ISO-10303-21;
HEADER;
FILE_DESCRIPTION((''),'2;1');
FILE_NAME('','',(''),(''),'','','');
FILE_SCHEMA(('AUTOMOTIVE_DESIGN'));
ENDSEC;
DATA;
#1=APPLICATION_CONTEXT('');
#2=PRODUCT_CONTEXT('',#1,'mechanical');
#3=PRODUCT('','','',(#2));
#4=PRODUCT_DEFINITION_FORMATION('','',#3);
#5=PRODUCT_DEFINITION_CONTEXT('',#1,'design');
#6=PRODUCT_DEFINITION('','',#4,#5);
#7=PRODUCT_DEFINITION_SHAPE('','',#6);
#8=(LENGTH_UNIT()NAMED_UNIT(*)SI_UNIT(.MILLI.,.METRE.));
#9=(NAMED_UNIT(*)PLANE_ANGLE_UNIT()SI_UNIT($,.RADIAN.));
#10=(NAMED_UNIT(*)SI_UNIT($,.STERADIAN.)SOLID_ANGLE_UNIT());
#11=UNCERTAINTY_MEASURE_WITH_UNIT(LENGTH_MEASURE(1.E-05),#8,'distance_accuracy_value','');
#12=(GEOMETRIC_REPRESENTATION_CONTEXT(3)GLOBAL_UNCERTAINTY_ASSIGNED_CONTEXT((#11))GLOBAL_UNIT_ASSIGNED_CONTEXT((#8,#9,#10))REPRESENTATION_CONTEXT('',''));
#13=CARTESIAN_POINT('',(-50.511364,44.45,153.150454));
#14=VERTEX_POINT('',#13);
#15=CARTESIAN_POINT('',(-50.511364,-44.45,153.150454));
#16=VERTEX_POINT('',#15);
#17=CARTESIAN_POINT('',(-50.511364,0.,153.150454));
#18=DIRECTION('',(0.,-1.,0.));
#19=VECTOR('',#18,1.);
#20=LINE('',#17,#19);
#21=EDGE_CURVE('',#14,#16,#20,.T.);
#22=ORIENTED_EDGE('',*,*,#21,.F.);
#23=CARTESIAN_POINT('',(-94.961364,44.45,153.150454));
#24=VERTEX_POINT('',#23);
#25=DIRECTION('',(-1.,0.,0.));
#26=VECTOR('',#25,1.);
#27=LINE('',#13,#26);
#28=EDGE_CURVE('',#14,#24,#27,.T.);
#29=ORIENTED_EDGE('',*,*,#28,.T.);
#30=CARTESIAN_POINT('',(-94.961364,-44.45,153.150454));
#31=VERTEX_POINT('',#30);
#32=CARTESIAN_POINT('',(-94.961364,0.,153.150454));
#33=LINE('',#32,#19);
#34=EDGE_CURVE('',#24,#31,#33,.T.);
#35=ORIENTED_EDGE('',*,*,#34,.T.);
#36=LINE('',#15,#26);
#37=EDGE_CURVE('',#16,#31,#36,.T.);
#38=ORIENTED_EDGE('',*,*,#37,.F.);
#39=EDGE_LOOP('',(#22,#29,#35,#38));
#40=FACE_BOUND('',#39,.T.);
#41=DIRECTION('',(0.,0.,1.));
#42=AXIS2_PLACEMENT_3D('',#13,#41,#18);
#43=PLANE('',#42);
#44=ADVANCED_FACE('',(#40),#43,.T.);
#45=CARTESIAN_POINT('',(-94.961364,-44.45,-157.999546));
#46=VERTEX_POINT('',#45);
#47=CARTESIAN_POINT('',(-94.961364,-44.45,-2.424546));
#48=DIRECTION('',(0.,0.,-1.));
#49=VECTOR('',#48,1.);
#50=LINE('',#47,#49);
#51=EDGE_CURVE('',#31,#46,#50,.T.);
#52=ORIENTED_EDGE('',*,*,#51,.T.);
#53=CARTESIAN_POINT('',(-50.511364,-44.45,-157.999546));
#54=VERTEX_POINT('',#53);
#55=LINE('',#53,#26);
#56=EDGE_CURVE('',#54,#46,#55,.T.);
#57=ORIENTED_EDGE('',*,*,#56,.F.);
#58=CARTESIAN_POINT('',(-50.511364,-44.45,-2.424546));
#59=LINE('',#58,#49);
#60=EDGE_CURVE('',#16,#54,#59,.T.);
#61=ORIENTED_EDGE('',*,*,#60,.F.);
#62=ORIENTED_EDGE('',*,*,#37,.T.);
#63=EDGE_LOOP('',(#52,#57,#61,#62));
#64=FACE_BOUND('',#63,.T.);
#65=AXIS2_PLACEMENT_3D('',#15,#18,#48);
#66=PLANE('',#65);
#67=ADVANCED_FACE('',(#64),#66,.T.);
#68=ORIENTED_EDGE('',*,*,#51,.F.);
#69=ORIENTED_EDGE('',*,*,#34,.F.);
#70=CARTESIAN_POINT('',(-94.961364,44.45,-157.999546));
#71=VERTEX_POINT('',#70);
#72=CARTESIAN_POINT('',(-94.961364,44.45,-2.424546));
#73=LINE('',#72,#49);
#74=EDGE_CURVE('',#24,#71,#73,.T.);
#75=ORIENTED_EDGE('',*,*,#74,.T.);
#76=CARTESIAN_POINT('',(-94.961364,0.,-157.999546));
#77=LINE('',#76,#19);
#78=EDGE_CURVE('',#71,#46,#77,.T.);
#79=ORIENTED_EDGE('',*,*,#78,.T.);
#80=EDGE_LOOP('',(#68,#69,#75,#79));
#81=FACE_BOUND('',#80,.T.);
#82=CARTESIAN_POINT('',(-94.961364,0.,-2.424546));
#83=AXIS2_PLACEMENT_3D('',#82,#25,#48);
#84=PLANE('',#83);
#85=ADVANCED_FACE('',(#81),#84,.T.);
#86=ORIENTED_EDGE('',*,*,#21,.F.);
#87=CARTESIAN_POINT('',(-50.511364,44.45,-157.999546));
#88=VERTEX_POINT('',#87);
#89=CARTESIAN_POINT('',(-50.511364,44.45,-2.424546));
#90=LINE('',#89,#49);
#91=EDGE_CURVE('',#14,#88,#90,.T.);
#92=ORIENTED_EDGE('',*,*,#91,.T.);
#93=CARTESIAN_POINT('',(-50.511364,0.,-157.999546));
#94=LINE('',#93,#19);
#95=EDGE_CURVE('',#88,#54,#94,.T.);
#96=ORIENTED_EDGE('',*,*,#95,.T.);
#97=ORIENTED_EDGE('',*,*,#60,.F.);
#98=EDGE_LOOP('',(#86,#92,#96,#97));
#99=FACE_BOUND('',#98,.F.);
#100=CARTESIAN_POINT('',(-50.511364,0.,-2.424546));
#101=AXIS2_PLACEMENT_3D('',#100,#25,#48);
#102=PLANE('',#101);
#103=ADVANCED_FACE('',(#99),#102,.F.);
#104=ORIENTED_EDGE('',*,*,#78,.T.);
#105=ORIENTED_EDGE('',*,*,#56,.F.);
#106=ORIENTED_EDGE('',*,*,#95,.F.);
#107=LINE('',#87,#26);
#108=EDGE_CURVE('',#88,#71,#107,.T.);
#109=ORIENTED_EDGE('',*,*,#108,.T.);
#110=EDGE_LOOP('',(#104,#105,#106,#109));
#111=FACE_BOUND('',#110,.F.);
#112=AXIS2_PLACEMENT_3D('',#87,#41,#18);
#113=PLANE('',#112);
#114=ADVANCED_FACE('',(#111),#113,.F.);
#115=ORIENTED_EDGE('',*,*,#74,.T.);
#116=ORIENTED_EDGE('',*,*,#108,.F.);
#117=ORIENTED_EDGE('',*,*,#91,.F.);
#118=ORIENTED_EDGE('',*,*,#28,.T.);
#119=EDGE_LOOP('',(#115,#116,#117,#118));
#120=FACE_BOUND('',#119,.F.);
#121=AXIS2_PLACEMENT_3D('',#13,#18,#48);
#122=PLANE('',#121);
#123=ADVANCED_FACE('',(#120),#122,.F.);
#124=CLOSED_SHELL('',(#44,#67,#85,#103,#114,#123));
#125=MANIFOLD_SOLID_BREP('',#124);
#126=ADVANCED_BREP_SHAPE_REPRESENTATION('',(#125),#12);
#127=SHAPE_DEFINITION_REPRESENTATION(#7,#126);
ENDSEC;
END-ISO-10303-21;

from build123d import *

# Parameters (mm, degrees)
F1_E0_W  = 311.15
F1_E0_H  = 88.9
F2_DEPTH = 44.45


with BuildPart() as f2:
    # F1_E0 (on explicit) → F2 (new body)
    with BuildSketch(Plane(origin=(-50.5113638937, 44.45, 153.1504544139), x_dir=(0, 0, -1), z_dir=(-1, 0, 0))):
        with Locations((155.575, 44.45)):
            Rectangle(F1_E0_W, F1_E0_H)
    extrude(amount=F2_DEPTH)


solid = f2.part
